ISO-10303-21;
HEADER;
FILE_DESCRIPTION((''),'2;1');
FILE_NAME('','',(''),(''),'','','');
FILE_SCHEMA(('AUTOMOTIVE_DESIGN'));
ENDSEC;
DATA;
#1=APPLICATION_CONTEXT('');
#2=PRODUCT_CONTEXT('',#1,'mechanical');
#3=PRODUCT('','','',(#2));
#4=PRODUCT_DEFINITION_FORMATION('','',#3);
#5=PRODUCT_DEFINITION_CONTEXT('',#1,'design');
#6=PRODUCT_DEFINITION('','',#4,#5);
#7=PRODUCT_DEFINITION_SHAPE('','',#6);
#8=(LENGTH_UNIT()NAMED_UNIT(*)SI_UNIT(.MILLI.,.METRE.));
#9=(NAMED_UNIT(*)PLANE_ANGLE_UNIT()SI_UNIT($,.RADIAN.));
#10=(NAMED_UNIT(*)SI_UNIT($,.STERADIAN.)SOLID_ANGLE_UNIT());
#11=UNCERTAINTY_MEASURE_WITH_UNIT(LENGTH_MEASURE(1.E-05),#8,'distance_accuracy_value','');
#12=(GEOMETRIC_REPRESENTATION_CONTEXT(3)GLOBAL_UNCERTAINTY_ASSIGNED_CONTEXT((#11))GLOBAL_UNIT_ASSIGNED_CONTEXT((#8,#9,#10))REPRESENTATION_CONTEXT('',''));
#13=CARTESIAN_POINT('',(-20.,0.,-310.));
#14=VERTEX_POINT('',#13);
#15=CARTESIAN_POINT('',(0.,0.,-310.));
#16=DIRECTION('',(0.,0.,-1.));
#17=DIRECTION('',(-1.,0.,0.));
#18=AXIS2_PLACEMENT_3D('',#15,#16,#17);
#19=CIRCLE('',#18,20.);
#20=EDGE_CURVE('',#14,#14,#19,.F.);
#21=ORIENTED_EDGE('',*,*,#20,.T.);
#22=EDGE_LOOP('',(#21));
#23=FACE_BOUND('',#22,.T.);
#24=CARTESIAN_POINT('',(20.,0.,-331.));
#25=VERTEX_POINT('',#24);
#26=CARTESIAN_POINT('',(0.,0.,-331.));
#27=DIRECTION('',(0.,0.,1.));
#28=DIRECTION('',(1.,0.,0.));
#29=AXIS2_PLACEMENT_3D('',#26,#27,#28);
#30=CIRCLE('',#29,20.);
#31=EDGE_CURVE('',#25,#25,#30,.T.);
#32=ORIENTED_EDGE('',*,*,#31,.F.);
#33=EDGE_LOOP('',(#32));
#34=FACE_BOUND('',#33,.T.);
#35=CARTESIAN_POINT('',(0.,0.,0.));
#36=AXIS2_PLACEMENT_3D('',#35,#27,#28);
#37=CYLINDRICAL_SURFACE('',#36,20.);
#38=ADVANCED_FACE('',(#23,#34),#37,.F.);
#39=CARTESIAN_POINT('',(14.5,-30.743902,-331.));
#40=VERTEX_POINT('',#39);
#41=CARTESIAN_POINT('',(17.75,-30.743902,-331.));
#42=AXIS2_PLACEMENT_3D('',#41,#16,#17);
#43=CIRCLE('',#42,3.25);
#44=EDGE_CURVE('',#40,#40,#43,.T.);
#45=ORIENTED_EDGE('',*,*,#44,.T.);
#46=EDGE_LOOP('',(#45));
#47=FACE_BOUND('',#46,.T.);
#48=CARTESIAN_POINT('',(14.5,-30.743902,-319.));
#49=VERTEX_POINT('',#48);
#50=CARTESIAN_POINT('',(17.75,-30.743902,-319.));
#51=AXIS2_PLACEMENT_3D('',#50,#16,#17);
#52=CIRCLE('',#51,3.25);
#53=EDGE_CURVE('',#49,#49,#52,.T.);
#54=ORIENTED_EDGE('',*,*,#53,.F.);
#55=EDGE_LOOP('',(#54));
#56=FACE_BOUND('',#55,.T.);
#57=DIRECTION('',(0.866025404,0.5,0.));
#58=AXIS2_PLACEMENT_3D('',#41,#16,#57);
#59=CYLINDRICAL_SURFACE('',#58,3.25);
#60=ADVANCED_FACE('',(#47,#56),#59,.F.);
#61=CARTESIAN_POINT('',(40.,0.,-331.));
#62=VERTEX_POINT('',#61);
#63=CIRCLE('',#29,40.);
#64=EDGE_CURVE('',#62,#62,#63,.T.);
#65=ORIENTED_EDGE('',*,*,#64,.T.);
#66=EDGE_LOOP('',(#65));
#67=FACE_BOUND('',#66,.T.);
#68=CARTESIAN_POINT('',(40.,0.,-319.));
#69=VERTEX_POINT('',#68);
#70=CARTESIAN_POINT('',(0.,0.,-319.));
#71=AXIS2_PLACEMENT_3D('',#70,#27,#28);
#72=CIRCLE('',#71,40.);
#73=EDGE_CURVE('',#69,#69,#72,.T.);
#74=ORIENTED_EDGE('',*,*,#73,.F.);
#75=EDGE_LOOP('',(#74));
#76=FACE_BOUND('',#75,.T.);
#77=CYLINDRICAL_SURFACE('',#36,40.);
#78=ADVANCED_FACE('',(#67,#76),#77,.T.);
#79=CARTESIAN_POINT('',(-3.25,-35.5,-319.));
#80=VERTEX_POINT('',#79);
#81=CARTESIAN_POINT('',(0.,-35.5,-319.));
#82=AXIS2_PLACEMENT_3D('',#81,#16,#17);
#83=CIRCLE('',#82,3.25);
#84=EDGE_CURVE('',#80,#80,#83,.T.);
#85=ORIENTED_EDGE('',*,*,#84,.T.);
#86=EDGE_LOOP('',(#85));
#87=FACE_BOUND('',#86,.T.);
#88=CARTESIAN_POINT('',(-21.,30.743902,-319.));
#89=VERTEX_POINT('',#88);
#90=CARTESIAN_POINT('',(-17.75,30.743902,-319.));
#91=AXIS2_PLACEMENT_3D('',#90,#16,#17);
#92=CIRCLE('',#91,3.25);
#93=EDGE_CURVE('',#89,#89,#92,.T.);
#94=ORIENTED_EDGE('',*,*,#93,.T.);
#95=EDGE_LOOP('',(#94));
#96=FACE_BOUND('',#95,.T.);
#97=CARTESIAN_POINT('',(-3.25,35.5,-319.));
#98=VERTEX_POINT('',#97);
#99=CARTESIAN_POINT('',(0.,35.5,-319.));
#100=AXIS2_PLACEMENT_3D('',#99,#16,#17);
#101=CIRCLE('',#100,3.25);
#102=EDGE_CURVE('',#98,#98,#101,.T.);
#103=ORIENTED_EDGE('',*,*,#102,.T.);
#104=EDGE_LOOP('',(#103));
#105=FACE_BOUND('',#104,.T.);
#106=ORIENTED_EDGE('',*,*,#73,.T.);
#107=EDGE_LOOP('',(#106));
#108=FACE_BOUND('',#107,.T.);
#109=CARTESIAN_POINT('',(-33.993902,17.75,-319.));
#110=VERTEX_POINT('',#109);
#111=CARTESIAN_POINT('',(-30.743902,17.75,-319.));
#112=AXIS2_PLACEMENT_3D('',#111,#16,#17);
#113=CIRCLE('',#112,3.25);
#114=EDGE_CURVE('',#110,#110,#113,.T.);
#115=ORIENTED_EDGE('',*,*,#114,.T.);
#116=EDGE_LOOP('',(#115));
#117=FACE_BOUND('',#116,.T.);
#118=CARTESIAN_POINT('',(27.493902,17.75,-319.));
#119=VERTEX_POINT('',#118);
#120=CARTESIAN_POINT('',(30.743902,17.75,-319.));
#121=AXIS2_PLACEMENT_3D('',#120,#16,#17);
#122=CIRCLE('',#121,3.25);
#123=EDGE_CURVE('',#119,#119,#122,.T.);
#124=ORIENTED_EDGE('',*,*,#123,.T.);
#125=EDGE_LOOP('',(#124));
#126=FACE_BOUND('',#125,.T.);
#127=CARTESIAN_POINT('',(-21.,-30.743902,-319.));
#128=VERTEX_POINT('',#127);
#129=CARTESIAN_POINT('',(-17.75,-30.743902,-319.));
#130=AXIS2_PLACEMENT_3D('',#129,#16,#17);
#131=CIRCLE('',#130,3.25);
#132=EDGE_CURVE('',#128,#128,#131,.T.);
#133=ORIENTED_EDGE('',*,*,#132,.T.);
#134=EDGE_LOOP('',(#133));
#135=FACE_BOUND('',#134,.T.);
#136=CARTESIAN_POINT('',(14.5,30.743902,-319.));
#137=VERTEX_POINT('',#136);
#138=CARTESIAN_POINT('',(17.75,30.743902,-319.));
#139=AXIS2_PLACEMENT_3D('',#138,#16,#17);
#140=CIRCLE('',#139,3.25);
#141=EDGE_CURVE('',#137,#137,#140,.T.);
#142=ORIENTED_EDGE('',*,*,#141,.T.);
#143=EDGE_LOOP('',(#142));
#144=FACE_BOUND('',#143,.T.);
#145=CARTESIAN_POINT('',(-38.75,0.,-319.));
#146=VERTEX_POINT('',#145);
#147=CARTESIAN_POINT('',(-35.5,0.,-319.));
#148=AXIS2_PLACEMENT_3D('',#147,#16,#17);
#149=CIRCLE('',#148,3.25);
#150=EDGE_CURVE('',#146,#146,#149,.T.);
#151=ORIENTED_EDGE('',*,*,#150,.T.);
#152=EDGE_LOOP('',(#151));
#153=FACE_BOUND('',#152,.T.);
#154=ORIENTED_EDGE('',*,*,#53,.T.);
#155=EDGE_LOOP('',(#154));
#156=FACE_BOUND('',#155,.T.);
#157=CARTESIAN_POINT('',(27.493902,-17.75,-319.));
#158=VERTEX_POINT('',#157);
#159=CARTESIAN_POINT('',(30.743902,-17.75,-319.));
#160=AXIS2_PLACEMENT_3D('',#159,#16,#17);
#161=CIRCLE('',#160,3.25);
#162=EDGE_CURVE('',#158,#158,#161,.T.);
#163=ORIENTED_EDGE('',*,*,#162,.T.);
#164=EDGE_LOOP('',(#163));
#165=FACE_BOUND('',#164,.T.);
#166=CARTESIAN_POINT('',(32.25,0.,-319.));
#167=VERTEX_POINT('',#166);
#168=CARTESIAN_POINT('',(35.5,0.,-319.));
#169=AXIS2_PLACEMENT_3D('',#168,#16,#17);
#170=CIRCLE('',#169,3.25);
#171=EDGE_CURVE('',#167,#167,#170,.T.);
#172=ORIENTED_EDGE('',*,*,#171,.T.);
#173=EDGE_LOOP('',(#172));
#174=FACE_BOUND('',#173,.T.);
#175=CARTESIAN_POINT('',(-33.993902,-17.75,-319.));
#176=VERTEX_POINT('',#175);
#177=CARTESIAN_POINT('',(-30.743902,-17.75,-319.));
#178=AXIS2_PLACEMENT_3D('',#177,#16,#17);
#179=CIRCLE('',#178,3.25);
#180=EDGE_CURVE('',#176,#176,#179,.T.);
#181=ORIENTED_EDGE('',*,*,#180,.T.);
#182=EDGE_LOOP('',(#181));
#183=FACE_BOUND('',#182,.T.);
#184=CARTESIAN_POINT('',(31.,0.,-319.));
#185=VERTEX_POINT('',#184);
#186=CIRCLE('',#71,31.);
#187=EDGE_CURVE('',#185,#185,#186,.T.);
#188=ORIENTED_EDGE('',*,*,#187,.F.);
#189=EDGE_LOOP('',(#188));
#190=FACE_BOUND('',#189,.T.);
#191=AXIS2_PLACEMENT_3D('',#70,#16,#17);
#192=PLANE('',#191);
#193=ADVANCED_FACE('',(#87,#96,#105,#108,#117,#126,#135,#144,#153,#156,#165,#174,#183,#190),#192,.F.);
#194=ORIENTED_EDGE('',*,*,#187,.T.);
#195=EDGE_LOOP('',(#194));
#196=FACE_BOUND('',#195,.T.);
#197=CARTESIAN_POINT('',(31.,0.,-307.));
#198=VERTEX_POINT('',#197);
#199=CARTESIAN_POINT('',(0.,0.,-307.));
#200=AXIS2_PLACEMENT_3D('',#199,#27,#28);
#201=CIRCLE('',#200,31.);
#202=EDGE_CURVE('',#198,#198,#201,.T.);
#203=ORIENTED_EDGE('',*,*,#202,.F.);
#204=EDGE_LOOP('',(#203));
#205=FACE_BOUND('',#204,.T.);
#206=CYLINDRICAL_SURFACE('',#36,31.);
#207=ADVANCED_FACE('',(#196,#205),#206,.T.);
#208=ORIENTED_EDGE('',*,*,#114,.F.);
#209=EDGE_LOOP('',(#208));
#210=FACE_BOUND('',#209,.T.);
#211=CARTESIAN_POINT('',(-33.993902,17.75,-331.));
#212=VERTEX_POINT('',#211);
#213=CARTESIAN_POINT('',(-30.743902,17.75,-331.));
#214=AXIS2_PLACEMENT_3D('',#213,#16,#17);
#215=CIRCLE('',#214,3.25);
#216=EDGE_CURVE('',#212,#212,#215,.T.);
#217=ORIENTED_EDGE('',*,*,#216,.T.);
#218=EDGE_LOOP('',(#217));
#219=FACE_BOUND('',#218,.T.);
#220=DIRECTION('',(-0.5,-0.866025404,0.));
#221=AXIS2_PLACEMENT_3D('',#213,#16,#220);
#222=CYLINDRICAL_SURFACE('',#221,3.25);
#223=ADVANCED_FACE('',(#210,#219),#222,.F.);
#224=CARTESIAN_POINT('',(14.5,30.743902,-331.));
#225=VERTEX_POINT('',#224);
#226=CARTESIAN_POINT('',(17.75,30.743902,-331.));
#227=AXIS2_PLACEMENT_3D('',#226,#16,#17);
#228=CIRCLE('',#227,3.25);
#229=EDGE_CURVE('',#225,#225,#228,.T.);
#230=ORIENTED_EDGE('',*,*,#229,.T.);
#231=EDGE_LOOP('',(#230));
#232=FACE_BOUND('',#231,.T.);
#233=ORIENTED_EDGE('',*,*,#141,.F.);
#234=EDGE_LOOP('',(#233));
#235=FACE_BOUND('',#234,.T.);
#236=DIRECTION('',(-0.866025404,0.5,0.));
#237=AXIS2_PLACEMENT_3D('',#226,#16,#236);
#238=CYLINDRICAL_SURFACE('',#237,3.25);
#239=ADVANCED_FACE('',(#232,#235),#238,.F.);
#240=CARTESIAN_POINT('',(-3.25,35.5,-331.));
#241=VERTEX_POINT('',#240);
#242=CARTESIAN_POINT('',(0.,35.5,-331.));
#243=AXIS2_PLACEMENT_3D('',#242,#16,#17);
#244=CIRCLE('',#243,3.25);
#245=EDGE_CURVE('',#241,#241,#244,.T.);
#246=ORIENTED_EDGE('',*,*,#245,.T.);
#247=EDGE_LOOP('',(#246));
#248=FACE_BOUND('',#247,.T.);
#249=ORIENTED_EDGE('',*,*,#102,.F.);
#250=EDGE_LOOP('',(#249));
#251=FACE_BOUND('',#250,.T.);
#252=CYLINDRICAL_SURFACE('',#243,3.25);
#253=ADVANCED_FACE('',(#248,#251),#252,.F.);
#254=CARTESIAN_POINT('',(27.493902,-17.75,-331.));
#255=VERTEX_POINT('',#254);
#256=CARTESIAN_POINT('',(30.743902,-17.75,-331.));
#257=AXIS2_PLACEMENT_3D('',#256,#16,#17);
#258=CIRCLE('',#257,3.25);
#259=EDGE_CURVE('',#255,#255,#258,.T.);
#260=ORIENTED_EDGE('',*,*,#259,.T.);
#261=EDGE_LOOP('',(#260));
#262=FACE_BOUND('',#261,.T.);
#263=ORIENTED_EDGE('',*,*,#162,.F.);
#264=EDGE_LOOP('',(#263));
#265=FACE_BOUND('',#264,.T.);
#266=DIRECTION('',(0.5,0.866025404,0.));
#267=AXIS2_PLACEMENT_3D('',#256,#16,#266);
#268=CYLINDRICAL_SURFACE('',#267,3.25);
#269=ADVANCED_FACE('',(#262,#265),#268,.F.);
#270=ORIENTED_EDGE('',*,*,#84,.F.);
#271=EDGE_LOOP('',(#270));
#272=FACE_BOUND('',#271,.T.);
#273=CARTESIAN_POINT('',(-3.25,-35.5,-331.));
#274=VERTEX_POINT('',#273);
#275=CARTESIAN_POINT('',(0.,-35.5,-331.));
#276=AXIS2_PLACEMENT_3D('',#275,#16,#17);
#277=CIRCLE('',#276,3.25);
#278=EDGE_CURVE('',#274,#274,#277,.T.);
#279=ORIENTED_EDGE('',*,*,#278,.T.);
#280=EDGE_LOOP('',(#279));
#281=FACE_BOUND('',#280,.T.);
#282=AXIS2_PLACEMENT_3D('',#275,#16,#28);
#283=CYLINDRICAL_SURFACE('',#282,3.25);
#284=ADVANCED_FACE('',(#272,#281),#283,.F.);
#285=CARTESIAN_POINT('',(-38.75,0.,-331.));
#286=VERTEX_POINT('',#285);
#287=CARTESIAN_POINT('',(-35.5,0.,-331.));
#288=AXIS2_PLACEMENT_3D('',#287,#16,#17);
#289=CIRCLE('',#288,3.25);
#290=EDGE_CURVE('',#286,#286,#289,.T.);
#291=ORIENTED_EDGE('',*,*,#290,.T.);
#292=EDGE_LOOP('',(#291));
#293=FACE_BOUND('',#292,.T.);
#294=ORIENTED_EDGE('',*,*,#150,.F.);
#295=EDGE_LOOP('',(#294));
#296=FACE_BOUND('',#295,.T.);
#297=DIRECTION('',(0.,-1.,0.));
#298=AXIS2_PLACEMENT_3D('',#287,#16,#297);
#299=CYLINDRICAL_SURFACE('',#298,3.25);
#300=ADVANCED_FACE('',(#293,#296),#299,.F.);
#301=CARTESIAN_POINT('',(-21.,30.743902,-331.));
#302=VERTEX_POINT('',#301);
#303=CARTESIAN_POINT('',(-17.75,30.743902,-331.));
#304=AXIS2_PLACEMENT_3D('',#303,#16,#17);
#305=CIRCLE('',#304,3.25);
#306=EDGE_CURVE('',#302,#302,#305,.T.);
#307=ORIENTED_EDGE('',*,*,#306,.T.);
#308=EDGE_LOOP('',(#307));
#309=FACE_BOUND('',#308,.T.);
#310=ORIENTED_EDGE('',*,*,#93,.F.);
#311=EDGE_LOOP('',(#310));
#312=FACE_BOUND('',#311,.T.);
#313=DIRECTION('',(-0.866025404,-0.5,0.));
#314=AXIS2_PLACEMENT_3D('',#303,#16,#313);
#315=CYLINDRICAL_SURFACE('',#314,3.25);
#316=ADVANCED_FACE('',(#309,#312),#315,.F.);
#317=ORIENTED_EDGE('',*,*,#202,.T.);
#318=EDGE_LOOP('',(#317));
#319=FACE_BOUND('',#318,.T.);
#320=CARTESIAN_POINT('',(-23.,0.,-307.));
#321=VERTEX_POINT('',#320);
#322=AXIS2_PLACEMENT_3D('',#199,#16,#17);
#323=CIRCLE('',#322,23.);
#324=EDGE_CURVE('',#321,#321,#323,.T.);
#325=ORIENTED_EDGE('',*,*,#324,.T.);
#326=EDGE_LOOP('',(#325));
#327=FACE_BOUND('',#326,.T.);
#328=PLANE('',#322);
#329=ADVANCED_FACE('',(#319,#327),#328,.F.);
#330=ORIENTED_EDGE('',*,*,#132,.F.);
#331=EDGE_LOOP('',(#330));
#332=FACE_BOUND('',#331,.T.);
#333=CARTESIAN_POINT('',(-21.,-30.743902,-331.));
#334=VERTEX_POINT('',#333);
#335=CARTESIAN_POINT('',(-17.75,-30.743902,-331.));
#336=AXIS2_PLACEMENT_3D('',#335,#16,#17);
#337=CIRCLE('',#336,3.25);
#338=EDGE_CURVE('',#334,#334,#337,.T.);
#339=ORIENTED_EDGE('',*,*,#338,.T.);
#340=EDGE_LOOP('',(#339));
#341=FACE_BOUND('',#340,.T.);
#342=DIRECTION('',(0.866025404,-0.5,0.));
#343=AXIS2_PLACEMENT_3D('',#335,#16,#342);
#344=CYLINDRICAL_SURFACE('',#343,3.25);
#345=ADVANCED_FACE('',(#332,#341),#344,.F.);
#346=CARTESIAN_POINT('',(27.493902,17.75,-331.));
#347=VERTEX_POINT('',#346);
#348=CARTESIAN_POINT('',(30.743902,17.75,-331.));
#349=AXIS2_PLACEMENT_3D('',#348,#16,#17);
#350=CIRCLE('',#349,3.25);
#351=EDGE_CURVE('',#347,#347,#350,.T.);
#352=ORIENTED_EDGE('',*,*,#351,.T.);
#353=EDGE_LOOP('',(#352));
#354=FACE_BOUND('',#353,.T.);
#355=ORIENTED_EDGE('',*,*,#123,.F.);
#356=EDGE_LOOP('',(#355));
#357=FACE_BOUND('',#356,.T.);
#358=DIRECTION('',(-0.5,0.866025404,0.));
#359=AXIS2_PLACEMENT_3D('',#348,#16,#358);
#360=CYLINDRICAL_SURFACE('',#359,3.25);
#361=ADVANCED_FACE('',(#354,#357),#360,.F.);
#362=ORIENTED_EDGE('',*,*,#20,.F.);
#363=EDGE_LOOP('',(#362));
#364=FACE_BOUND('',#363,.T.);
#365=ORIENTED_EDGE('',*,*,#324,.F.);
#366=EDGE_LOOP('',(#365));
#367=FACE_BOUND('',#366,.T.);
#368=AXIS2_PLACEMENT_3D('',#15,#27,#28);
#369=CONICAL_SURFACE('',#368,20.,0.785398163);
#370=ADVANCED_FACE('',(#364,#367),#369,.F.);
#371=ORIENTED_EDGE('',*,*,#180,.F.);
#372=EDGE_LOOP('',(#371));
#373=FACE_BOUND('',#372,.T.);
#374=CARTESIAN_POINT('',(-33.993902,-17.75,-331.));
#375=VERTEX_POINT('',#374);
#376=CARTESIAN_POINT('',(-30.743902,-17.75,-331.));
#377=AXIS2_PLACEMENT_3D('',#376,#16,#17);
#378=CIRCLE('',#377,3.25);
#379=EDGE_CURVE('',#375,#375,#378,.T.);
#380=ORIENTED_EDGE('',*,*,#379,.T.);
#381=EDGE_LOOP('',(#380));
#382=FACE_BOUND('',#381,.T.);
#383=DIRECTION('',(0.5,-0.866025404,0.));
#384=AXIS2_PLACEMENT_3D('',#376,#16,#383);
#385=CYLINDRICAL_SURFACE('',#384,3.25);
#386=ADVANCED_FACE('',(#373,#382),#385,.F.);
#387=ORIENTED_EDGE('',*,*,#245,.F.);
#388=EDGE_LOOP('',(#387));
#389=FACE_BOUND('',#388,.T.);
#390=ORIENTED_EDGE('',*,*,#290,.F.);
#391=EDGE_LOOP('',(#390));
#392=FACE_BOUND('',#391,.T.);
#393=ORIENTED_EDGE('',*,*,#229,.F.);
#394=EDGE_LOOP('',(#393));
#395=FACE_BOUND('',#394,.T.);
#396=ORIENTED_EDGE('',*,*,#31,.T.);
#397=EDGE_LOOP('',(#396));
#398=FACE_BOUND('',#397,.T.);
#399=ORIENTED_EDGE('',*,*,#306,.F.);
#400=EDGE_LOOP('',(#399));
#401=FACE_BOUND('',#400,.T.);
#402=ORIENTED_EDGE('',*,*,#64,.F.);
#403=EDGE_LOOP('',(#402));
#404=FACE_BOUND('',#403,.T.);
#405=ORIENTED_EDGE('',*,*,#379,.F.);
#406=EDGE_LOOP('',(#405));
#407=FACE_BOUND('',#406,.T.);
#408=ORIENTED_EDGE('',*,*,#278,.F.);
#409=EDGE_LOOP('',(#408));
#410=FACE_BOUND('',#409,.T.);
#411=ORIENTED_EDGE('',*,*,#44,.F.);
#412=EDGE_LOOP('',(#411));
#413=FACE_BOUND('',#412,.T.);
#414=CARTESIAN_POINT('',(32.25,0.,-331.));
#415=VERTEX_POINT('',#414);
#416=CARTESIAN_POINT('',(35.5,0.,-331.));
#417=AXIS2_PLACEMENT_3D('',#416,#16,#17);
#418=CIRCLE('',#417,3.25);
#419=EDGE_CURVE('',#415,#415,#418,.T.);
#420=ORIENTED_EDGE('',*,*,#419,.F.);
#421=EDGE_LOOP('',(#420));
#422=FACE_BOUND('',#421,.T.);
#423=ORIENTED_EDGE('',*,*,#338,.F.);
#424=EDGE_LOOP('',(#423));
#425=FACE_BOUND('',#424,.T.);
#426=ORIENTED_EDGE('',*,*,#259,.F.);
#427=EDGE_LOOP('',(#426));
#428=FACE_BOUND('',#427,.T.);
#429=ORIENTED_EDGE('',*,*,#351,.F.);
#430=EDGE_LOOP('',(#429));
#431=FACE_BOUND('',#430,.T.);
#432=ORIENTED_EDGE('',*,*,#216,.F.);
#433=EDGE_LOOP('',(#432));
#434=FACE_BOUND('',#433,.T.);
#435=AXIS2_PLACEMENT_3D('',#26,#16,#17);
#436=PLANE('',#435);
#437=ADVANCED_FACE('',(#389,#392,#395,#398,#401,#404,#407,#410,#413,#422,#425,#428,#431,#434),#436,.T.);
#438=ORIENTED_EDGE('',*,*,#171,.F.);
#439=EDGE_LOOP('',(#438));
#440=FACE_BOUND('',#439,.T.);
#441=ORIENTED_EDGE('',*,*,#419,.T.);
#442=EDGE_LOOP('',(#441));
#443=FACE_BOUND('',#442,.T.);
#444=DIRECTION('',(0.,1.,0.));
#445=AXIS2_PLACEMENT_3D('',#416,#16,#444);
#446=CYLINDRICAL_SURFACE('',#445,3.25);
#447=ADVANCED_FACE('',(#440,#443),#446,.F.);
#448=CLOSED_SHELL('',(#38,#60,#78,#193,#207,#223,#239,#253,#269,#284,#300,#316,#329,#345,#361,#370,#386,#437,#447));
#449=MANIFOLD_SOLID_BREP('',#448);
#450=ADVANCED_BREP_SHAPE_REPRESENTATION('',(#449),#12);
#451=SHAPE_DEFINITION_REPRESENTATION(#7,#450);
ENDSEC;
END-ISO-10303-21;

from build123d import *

# Parameters (mm, degrees)
STOCK_PPV4_2_START                       = -331
STOCK_PPV4_2_EXTRUDER_MB_1_OUTLINE_R     = 31
STOCK_PPV4_2_EXTRUDER_MB_1_OUTLINE_R_2   = 20
STOCK_PPV4_2_EXTRUDER_MB_1_DEPTH         = 24
STOCK_PPV4_2_EXTRUDER_MB_1_2_OUTLINE_R   = 40
STOCK_PPV4_2_EXTRUDER_MB_1_2_OUTLINE_R_2 = 3.3
STOCK_PPV4_2_EXTRUDER_MB_1_2_OUTLINE_R_3 = 31
STOCK_PPV4_2_EXTRUDER_MB_1_2_DEPTH       = 12
MOVE_FACE1_BY                            = 0.05
MOVE_FACE1_2_BY                          = 0.05
MOVE_FACE1_3_BY                          = 0.05
MOVE_FACE1_4_BY                          = 0.05
MOVE_FACE1_5_BY                          = 0.05
MOVE_FACE1_6_BY                          = 0.05
MOVE_FACE1_7_BY                          = 0.05
MOVE_FACE1_8_BY                          = 0.05
MOVE_FACE1_9_BY                          = 0.05
MOVE_FACE1_10_BY                         = 0.05
MOVE_FACE1_11_BY                         = 0.05
MOVE_FACE1_12_BY                         = 0.05
CHAMFER1_SIZE                            = 3


# Read off the part's stored shape, not the designer's step: Stock-PPV4.2 - Extruder - MB-1
with BuildPart() as part:
    # Stock-PPV4.2 - Extruder - MB-1 outline → Stock-PPV4.2 - Extruder - MB-1 (new body)
    with BuildSketch(Plane.XY.offset(STOCK_PPV4_2_START)):
        Circle(STOCK_PPV4_2_EXTRUDER_MB_1_OUTLINE_R)
        Circle(STOCK_PPV4_2_EXTRUDER_MB_1_OUTLINE_R_2, mode=Mode.SUBTRACT)
    extrude(amount=STOCK_PPV4_2_EXTRUDER_MB_1_DEPTH)

    # Stock-PPV4.2 - Extruder - MB-1 2 outline → Stock-PPV4.2 - Extruder - MB-1 2 (add)
    with BuildSketch(Plane.XY.offset(STOCK_PPV4_2_START)):
        Circle(STOCK_PPV4_2_EXTRUDER_MB_1_2_OUTLINE_R)
        with Locations((-17.75, -30.743901834)):
            Circle(STOCK_PPV4_2_EXTRUDER_MB_1_2_OUTLINE_R_2, mode=Mode.SUBTRACT)
        with Locations((-30.743901834, -17.75)):
            Circle(STOCK_PPV4_2_EXTRUDER_MB_1_2_OUTLINE_R_2, mode=Mode.SUBTRACT)
        with Locations((0, -35.5)):
            Circle(STOCK_PPV4_2_EXTRUDER_MB_1_2_OUTLINE_R_2, mode=Mode.SUBTRACT)
        with Locations((17.75, -30.743901834)):
            Circle(STOCK_PPV4_2_EXTRUDER_MB_1_2_OUTLINE_R_2, mode=Mode.SUBTRACT)
        with Locations((30.743901834, -17.75)):
            Circle(STOCK_PPV4_2_EXTRUDER_MB_1_2_OUTLINE_R_2, mode=Mode.SUBTRACT)
        with Locations((-35.5, 0)):
            Circle(STOCK_PPV4_2_EXTRUDER_MB_1_2_OUTLINE_R_2, mode=Mode.SUBTRACT)
        with Locations((-30.743901834, 17.75)):
            Circle(STOCK_PPV4_2_EXTRUDER_MB_1_2_OUTLINE_R_2, mode=Mode.SUBTRACT)
        with Locations((-17.75, 30.743901834)):
            Circle(STOCK_PPV4_2_EXTRUDER_MB_1_2_OUTLINE_R_2, mode=Mode.SUBTRACT)
        Circle(STOCK_PPV4_2_EXTRUDER_MB_1_2_OUTLINE_R_3, mode=Mode.SUBTRACT)
        with Locations((35.5, 0)):
            Circle(STOCK_PPV4_2_EXTRUDER_MB_1_2_OUTLINE_R_2, mode=Mode.SUBTRACT)
        with Locations((30.743901834, 17.75)):
            Circle(STOCK_PPV4_2_EXTRUDER_MB_1_2_OUTLINE_R_2, mode=Mode.SUBTRACT)
        with Locations((0, 35.5)):
            Circle(STOCK_PPV4_2_EXTRUDER_MB_1_2_OUTLINE_R_2, mode=Mode.SUBTRACT)
        with Locations((17.75, 30.743901834)):
            Circle(STOCK_PPV4_2_EXTRUDER_MB_1_2_OUTLINE_R_2, mode=Mode.SUBTRACT)
    extrude(amount=STOCK_PPV4_2_EXTRUDER_MB_1_2_DEPTH)

    # Move Face1: a curved face moved outward by 0.05
    add(Solid.thicken(part.faces().sort_by_distance((27.443901834, -17.75, -325))[0], MOVE_FACE1_BY))

    # Move Face1 2: a curved face moved outward by 0.05
    add(Solid.thicken(part.faces().sort_by_distance((14.45, -30.743901834, -325))[0], MOVE_FACE1_2_BY))

    # Move Face1 3: a curved face moved outward by 0.05
    add(Solid.thicken(part.faces().sort_by_distance((32.2, 0, -325))[0], MOVE_FACE1_3_BY))

    # Move Face1 4: a curved face moved outward by 0.05
    add(Solid.thicken(part.faces().sort_by_distance((27.443901834, 17.75, -325))[0], MOVE_FACE1_4_BY))

    # Move Face1 5: a curved face moved outward by 0.05
    add(Solid.thicken(part.faces().sort_by_distance((14.45, 30.743901834, -325))[0], MOVE_FACE1_5_BY))

    # Move Face1 6: a curved face moved outward by 0.05
    add(Solid.thicken(part.faces().sort_by_distance((-3.3, 35.5, -325))[0], MOVE_FACE1_6_BY))

    # Move Face1 7: a curved face moved outward by 0.05
    add(Solid.thicken(part.faces().sort_by_distance((-21.05, 30.743901834, -325))[0], MOVE_FACE1_7_BY))

    # Move Face1 8: a curved face moved outward by 0.05
    add(Solid.thicken(part.faces().sort_by_distance((-34.043901834, 17.75, -325))[0], MOVE_FACE1_8_BY))

    # Move Face1 9: a curved face moved outward by 0.05
    add(Solid.thicken(part.faces().sort_by_distance((-38.8, 0, -325))[0], MOVE_FACE1_9_BY))

    # Move Face1 10: a curved face moved outward by 0.05
    add(Solid.thicken(part.faces().sort_by_distance((-34.043901834, -17.75, -325))[0], MOVE_FACE1_10_BY))

    # Move Face1 11: a curved face moved outward by 0.05
    add(Solid.thicken(part.faces().sort_by_distance((-21.05, -30.743901834, -325))[0], MOVE_FACE1_11_BY))

    # Move Face1 12: a curved face moved outward by 0.05
    add(Solid.thicken(part.faces().sort_by_distance((-3.3, -35.5, -325))[0], MOVE_FACE1_12_BY))

    # Chamfer1
    chamfer1_edges = [part.edges().sort_by_distance(p)[0] for p in [
        (-20, 0, -307),
    ]]
    chamfer(chamfer1_edges, length=CHAMFER1_SIZE)


solid = part.part
